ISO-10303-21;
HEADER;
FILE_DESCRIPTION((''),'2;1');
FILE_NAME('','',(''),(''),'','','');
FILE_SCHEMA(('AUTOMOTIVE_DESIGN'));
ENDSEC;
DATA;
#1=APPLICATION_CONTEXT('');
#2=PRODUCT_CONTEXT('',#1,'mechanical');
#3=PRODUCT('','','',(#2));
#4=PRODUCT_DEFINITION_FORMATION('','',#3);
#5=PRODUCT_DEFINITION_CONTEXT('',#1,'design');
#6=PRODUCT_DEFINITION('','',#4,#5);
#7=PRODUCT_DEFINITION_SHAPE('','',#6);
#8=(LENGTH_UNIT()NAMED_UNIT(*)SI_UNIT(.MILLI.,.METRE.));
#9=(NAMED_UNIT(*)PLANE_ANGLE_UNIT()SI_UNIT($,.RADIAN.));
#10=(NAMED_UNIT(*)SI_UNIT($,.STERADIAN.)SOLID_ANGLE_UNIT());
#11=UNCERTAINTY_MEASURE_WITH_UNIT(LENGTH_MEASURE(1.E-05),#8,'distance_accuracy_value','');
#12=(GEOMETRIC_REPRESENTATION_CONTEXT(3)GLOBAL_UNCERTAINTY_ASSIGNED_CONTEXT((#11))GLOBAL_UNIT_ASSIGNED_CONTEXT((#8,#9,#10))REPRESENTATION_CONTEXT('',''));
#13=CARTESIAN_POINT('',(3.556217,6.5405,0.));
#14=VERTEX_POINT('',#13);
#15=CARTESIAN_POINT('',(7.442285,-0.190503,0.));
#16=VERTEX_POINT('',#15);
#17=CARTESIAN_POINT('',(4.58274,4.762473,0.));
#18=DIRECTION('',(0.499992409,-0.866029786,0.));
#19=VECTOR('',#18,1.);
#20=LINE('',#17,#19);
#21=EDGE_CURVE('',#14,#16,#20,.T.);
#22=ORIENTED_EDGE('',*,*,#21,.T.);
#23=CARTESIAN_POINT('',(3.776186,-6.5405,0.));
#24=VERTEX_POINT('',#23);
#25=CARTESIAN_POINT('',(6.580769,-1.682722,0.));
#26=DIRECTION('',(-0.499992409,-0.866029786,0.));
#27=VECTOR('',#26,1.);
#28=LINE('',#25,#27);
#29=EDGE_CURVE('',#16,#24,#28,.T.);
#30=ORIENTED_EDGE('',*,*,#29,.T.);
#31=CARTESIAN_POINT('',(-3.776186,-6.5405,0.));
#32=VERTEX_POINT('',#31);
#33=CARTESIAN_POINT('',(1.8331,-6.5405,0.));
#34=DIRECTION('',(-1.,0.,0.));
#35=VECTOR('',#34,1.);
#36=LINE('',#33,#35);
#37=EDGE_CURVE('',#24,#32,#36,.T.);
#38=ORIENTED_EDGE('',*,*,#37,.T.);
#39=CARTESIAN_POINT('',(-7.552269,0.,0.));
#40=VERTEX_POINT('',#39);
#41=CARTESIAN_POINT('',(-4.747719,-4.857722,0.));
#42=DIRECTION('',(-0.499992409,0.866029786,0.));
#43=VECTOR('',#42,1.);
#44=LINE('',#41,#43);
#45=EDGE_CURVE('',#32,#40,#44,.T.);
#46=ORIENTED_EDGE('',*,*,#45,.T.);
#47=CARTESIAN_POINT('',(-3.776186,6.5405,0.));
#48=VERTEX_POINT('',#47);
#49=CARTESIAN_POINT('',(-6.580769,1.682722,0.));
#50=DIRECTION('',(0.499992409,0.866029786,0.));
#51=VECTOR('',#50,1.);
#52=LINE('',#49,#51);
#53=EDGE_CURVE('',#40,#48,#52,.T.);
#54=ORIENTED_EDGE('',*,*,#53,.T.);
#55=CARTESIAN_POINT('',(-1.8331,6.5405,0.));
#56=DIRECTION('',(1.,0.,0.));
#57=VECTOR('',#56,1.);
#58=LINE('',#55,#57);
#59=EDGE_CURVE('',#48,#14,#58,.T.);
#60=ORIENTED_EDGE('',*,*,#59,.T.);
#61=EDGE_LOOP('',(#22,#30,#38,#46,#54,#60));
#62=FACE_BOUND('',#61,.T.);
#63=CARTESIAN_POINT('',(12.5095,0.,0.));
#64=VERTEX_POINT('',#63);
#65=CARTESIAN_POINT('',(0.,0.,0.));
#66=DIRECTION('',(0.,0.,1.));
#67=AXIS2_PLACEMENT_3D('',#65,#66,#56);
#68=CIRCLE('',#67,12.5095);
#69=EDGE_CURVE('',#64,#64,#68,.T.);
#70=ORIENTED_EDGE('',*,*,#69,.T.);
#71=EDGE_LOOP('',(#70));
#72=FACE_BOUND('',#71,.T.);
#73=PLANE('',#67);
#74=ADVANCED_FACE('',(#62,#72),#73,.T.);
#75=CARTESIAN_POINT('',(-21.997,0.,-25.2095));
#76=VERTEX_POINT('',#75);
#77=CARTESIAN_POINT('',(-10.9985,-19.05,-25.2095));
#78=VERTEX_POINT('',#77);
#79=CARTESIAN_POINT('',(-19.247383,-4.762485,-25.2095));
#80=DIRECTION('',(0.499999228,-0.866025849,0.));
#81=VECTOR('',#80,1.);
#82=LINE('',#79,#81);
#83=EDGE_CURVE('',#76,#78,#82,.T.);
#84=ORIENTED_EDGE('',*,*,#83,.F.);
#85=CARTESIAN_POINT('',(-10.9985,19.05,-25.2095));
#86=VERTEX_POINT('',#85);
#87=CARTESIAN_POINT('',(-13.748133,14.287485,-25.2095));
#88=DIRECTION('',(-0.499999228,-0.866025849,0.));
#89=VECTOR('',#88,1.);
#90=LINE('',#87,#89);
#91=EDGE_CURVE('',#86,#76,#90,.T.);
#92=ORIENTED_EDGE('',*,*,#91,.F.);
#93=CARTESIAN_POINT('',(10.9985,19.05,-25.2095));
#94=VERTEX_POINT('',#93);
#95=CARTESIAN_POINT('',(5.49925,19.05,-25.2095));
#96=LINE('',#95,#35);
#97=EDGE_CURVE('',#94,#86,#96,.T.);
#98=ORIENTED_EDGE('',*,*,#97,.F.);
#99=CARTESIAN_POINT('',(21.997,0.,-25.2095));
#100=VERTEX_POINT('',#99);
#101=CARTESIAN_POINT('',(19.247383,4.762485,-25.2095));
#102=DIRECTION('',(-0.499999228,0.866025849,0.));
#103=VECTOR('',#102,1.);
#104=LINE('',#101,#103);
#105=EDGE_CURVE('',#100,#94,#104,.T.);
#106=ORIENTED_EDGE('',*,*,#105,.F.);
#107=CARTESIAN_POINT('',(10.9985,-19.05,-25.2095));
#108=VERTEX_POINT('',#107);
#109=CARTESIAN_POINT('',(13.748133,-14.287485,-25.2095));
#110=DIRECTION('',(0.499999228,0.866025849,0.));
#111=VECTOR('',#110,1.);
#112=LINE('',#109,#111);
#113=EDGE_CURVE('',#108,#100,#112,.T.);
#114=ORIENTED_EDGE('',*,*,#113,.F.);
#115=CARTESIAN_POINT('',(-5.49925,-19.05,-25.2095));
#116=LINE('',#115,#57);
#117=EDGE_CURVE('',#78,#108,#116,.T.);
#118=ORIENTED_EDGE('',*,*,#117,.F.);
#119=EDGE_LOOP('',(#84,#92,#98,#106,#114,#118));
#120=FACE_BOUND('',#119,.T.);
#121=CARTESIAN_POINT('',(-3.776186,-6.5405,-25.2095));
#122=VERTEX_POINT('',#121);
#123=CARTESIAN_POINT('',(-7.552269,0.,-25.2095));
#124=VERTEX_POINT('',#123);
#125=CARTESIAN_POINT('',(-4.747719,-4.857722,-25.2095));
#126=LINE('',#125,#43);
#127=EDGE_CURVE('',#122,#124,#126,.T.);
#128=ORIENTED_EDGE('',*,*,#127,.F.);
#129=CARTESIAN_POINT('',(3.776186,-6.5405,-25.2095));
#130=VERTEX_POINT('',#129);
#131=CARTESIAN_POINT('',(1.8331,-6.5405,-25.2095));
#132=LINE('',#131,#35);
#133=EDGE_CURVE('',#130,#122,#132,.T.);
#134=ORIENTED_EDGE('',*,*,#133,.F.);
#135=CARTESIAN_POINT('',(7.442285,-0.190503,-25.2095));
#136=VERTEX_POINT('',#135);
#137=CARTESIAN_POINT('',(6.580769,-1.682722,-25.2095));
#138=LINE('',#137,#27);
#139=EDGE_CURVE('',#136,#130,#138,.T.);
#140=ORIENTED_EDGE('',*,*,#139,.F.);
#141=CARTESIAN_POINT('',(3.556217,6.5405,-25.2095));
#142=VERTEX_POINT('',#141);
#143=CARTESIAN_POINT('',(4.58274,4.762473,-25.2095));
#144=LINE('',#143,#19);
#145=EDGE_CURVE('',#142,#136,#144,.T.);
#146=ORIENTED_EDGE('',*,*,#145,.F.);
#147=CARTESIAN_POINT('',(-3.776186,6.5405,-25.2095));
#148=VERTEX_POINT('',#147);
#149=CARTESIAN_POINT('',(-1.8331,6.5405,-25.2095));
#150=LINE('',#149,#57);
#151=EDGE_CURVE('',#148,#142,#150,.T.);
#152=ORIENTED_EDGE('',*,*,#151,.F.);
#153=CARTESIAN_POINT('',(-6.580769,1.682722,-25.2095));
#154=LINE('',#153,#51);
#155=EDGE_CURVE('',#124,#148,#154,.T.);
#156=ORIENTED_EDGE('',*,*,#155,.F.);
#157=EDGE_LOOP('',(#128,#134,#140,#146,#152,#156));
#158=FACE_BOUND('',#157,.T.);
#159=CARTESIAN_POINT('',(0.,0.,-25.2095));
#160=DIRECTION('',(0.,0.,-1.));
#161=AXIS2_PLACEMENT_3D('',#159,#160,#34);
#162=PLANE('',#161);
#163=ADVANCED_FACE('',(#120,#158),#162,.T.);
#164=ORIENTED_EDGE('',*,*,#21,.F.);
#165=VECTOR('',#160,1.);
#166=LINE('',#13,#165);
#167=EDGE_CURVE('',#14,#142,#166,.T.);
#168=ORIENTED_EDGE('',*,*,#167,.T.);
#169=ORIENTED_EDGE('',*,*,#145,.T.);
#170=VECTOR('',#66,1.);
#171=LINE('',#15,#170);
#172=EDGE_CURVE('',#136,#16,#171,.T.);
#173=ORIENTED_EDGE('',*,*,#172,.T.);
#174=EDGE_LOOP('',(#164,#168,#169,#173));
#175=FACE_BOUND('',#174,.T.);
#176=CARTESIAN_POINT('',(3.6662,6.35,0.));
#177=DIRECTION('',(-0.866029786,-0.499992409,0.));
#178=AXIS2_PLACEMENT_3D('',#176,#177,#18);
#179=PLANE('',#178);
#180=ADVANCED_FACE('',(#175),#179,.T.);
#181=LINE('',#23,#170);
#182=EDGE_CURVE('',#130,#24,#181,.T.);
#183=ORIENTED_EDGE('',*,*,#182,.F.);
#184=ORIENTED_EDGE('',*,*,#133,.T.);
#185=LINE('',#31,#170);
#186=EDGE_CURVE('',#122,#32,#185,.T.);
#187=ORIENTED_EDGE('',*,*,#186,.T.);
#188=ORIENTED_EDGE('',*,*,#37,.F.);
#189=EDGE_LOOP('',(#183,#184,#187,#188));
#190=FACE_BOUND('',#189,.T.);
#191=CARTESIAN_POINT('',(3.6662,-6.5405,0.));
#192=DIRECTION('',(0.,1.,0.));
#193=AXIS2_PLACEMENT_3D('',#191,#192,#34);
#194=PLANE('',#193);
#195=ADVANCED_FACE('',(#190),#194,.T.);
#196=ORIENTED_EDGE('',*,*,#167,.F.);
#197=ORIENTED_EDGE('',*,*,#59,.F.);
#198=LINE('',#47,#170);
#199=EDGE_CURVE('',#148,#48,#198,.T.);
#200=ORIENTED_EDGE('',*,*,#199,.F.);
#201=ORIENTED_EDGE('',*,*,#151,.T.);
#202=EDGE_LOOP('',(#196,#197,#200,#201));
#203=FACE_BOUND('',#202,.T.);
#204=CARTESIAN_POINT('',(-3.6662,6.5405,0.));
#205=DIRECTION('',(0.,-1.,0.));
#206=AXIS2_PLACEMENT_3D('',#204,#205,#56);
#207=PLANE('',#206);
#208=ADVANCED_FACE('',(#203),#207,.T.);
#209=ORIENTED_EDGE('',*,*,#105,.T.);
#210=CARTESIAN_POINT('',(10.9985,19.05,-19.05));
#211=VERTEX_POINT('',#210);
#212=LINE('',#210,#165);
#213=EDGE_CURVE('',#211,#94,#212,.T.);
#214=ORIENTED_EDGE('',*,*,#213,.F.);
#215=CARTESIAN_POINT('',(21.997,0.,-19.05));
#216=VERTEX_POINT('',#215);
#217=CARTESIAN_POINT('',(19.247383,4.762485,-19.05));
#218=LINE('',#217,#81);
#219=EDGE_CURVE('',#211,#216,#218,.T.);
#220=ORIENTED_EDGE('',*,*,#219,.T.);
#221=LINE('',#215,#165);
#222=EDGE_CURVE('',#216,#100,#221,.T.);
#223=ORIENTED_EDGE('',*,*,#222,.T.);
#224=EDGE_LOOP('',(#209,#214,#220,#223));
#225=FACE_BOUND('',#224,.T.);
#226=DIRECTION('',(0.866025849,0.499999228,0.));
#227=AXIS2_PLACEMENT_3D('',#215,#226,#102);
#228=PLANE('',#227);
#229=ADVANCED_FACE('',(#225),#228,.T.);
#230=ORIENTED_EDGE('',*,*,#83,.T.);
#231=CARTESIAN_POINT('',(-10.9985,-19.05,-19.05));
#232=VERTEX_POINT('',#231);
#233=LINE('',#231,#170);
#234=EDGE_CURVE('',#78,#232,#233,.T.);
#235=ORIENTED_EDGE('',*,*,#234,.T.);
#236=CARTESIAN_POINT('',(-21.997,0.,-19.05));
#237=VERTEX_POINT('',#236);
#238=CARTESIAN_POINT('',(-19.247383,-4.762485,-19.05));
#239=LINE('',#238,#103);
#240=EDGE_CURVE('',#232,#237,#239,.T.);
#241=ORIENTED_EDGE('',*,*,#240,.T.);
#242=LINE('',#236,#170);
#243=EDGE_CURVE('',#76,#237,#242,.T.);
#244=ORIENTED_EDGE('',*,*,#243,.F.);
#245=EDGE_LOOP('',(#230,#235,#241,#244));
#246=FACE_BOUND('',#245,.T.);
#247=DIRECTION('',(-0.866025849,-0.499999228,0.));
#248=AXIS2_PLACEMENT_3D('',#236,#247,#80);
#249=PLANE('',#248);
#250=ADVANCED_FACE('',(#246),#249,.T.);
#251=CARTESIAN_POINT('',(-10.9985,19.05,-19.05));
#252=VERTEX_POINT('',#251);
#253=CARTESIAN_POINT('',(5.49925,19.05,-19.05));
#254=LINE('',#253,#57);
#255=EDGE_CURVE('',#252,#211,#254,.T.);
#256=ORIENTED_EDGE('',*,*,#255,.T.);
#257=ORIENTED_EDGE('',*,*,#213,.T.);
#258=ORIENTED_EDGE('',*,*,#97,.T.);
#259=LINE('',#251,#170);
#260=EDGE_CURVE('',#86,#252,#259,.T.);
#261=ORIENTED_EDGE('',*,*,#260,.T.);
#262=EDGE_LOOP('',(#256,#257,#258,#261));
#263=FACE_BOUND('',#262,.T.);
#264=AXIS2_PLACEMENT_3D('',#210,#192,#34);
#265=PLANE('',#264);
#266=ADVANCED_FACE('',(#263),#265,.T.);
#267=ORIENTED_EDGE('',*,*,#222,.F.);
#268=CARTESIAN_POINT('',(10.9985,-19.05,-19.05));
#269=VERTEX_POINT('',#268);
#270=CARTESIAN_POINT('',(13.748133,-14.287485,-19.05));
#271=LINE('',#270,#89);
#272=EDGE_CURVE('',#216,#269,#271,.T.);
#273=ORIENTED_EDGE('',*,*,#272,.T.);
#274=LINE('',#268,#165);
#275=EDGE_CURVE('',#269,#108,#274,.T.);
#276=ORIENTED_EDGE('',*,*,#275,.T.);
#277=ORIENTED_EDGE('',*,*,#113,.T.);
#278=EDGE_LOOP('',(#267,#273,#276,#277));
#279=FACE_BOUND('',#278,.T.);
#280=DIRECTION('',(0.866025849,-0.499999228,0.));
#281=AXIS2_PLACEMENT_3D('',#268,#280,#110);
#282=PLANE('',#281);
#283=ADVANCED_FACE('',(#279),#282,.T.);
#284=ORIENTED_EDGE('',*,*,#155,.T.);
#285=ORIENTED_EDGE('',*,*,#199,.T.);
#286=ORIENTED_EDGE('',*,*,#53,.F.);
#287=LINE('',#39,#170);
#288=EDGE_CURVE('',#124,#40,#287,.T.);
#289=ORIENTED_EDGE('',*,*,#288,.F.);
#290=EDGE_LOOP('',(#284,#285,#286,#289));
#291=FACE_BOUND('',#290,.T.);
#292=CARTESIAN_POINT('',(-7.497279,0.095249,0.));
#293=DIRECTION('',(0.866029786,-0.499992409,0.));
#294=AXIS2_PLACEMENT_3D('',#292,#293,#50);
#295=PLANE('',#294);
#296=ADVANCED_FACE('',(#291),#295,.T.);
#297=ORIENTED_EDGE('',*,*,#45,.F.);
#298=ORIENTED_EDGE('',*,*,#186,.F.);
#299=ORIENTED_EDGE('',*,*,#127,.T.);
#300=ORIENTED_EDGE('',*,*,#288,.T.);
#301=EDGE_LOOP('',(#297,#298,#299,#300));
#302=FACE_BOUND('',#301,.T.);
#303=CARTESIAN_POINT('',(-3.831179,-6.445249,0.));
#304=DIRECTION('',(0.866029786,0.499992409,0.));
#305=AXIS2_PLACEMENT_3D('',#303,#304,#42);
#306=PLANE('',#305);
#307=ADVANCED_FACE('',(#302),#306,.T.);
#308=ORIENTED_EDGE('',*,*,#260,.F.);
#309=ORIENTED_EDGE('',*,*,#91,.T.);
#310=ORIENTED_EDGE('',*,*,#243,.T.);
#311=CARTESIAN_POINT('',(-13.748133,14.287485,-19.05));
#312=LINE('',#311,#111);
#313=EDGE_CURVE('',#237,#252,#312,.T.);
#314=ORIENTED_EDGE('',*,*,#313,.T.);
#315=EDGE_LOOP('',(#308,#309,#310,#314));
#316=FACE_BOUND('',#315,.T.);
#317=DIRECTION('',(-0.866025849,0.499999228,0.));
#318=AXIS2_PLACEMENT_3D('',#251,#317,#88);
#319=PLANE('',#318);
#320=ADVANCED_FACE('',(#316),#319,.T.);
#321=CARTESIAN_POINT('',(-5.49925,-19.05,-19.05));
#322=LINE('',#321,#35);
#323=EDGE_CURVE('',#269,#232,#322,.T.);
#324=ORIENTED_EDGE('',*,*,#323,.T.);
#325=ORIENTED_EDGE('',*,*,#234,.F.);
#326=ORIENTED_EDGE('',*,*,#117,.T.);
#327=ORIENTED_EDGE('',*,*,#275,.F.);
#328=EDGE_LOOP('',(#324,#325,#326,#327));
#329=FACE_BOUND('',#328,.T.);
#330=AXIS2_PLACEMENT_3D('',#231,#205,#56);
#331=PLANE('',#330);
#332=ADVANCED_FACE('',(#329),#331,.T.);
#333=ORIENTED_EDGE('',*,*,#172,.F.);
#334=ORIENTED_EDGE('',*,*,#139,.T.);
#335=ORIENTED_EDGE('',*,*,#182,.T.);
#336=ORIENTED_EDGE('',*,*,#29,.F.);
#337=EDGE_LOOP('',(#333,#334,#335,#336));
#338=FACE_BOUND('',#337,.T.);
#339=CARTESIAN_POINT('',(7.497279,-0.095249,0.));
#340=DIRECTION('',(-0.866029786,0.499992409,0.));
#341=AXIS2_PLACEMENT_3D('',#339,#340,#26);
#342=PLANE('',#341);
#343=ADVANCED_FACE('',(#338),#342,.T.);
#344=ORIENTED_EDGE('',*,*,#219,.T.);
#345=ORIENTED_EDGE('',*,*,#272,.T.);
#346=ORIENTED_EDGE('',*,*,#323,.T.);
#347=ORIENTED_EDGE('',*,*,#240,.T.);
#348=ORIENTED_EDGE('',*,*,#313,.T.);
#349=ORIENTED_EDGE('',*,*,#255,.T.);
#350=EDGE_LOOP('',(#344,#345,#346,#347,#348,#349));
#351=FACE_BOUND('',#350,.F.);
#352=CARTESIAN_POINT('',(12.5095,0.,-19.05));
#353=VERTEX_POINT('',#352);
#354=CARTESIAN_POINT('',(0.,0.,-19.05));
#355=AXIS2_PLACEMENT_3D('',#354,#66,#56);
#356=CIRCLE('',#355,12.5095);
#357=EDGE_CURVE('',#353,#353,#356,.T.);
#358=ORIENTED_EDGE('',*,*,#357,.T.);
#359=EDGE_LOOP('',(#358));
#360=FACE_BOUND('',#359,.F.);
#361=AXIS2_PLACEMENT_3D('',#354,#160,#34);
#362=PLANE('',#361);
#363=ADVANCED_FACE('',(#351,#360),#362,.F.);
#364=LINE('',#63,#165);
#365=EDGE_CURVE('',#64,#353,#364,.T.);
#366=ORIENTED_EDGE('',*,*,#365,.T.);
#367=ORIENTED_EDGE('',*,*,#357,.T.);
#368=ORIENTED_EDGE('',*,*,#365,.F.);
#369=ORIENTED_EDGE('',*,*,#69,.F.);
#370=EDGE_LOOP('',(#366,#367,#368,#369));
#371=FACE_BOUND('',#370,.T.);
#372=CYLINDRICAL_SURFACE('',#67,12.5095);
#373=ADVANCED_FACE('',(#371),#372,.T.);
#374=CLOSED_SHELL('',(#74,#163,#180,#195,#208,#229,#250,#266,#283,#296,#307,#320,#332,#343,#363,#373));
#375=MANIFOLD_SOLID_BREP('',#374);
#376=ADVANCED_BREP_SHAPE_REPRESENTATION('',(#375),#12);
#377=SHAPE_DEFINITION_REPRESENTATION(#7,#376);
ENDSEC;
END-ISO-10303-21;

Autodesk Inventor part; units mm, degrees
ref_plane "YZ Plane" through (0, 0, 0) normal (1, 0, 0) x (0, 1, 0)
ref_plane "XZ Plane" through (0, 0, 0) normal (0, 1, 0) x (-1, 0, 0)
ref_plane "XY Plane" through (0, 0, 0) normal (0, 0, 1) x (1, 0, 0)
sketch "Sketch1" plane through (0, 0, 0) normal (0, 0, 1) x (1, 0, 0)
  line L0 (3.6662, 6.35) -> (7.3323, 0)
  line L1 (7.3323, 0) -> (3.6662, -6.35)
  line L2 (3.6662, -6.35) -> (-3.6662, -6.35)
  line L3 (-3.6662, -6.35) -> (-7.3323, 0)
  line L4 (-7.3323, 0) -> (-3.6662, 6.35)
  line L5 (-3.6662, 6.35) -> (3.6662, 6.35)
  circle A0 centre (0, 0) radius 12.7
  circle A1 centre (0, 0) radius 7.3323 construction
  dimension "d0" = 12.7
  dimension "d2" = 25.4
  dimension "d3" = 5.3677
extrude "Extrusion1" add sketch "Sketch1" against normal blind 19.05
sketch "Sketch2" plane through (0, 0, -19.05) normal (0, 0, -1) x (-1, 0, 0)
  line L0 (7.3323, 0) -> (3.6662, -6.35) projected
  line L1 (3.6662, -6.35) -> (-3.6662, -6.35)
  line L2 (-3.6662, -6.35) -> (-7.3323, 0)
  line L3 (-7.3323, 0) -> (-3.6662, 6.35)
  line L4 (-3.6662, 6.35) -> (3.6662, 6.35)
  line L5 (3.6662, 6.35) -> (7.3323, 0)
  line L6 (7.3323, 0) -> (3.6662, -6.35)
  line L7 (-10.9985, 19.05) -> (10.9985, 19.05)
  line L8 (10.9985, 19.05) -> (21.997, 0)
  line L9 (21.997, 0) -> (10.9985, -19.05)
  line L10 (10.9985, -19.05) -> (-10.9985, -19.05)
  line L11 (-10.9985, -19.05) -> (-21.997, 0)
  line L12 (-21.997, 0) -> (-10.9985, 19.05)
  point P0 (0, 0)
  point P1 (0, 0)
  point P2 (0, 0)
  dimension "d7" = 12.7
  dimension "d10" = 38.1
extrude "Extrusion3" add sketch "Sketch2" along normal blind 6.35
thicken "Thicken Internal Hex Hold" operation add thickness 0.1905 both sides no extend neighbours yes toward (0, 1, 0) faces at (1.2221, 6.35, -16.9333) (-4.8882, 4.2333, -16.9333) (1.2221, 14.8167, -25.4) (6.1103, -2.1167, -16.9333) (1.2221, -6.35, -16.9333) (-4.8882, -4.2333, -16.9333)
thicken "Reduce Size of Bushing Fitting" operation add thickness 0.1905 both sides no extend neighbours yes toward (-0.9870503, 0.1604113, 0) faces at (12.5355, -2.0372, -12.7)
equation "\"d13\" = printSpacing"
equation "\"d14\" = printSpacing"
equation "\"d15\" = printSpacing"
equation "\"d16\" = printSpacing"
equation "\"hexSize\" = 12.7"
equation "\"printSpacing\" = 0.1905"
properties part number "1_2x1-hexBushing" material "PC/ABS Plastic"
